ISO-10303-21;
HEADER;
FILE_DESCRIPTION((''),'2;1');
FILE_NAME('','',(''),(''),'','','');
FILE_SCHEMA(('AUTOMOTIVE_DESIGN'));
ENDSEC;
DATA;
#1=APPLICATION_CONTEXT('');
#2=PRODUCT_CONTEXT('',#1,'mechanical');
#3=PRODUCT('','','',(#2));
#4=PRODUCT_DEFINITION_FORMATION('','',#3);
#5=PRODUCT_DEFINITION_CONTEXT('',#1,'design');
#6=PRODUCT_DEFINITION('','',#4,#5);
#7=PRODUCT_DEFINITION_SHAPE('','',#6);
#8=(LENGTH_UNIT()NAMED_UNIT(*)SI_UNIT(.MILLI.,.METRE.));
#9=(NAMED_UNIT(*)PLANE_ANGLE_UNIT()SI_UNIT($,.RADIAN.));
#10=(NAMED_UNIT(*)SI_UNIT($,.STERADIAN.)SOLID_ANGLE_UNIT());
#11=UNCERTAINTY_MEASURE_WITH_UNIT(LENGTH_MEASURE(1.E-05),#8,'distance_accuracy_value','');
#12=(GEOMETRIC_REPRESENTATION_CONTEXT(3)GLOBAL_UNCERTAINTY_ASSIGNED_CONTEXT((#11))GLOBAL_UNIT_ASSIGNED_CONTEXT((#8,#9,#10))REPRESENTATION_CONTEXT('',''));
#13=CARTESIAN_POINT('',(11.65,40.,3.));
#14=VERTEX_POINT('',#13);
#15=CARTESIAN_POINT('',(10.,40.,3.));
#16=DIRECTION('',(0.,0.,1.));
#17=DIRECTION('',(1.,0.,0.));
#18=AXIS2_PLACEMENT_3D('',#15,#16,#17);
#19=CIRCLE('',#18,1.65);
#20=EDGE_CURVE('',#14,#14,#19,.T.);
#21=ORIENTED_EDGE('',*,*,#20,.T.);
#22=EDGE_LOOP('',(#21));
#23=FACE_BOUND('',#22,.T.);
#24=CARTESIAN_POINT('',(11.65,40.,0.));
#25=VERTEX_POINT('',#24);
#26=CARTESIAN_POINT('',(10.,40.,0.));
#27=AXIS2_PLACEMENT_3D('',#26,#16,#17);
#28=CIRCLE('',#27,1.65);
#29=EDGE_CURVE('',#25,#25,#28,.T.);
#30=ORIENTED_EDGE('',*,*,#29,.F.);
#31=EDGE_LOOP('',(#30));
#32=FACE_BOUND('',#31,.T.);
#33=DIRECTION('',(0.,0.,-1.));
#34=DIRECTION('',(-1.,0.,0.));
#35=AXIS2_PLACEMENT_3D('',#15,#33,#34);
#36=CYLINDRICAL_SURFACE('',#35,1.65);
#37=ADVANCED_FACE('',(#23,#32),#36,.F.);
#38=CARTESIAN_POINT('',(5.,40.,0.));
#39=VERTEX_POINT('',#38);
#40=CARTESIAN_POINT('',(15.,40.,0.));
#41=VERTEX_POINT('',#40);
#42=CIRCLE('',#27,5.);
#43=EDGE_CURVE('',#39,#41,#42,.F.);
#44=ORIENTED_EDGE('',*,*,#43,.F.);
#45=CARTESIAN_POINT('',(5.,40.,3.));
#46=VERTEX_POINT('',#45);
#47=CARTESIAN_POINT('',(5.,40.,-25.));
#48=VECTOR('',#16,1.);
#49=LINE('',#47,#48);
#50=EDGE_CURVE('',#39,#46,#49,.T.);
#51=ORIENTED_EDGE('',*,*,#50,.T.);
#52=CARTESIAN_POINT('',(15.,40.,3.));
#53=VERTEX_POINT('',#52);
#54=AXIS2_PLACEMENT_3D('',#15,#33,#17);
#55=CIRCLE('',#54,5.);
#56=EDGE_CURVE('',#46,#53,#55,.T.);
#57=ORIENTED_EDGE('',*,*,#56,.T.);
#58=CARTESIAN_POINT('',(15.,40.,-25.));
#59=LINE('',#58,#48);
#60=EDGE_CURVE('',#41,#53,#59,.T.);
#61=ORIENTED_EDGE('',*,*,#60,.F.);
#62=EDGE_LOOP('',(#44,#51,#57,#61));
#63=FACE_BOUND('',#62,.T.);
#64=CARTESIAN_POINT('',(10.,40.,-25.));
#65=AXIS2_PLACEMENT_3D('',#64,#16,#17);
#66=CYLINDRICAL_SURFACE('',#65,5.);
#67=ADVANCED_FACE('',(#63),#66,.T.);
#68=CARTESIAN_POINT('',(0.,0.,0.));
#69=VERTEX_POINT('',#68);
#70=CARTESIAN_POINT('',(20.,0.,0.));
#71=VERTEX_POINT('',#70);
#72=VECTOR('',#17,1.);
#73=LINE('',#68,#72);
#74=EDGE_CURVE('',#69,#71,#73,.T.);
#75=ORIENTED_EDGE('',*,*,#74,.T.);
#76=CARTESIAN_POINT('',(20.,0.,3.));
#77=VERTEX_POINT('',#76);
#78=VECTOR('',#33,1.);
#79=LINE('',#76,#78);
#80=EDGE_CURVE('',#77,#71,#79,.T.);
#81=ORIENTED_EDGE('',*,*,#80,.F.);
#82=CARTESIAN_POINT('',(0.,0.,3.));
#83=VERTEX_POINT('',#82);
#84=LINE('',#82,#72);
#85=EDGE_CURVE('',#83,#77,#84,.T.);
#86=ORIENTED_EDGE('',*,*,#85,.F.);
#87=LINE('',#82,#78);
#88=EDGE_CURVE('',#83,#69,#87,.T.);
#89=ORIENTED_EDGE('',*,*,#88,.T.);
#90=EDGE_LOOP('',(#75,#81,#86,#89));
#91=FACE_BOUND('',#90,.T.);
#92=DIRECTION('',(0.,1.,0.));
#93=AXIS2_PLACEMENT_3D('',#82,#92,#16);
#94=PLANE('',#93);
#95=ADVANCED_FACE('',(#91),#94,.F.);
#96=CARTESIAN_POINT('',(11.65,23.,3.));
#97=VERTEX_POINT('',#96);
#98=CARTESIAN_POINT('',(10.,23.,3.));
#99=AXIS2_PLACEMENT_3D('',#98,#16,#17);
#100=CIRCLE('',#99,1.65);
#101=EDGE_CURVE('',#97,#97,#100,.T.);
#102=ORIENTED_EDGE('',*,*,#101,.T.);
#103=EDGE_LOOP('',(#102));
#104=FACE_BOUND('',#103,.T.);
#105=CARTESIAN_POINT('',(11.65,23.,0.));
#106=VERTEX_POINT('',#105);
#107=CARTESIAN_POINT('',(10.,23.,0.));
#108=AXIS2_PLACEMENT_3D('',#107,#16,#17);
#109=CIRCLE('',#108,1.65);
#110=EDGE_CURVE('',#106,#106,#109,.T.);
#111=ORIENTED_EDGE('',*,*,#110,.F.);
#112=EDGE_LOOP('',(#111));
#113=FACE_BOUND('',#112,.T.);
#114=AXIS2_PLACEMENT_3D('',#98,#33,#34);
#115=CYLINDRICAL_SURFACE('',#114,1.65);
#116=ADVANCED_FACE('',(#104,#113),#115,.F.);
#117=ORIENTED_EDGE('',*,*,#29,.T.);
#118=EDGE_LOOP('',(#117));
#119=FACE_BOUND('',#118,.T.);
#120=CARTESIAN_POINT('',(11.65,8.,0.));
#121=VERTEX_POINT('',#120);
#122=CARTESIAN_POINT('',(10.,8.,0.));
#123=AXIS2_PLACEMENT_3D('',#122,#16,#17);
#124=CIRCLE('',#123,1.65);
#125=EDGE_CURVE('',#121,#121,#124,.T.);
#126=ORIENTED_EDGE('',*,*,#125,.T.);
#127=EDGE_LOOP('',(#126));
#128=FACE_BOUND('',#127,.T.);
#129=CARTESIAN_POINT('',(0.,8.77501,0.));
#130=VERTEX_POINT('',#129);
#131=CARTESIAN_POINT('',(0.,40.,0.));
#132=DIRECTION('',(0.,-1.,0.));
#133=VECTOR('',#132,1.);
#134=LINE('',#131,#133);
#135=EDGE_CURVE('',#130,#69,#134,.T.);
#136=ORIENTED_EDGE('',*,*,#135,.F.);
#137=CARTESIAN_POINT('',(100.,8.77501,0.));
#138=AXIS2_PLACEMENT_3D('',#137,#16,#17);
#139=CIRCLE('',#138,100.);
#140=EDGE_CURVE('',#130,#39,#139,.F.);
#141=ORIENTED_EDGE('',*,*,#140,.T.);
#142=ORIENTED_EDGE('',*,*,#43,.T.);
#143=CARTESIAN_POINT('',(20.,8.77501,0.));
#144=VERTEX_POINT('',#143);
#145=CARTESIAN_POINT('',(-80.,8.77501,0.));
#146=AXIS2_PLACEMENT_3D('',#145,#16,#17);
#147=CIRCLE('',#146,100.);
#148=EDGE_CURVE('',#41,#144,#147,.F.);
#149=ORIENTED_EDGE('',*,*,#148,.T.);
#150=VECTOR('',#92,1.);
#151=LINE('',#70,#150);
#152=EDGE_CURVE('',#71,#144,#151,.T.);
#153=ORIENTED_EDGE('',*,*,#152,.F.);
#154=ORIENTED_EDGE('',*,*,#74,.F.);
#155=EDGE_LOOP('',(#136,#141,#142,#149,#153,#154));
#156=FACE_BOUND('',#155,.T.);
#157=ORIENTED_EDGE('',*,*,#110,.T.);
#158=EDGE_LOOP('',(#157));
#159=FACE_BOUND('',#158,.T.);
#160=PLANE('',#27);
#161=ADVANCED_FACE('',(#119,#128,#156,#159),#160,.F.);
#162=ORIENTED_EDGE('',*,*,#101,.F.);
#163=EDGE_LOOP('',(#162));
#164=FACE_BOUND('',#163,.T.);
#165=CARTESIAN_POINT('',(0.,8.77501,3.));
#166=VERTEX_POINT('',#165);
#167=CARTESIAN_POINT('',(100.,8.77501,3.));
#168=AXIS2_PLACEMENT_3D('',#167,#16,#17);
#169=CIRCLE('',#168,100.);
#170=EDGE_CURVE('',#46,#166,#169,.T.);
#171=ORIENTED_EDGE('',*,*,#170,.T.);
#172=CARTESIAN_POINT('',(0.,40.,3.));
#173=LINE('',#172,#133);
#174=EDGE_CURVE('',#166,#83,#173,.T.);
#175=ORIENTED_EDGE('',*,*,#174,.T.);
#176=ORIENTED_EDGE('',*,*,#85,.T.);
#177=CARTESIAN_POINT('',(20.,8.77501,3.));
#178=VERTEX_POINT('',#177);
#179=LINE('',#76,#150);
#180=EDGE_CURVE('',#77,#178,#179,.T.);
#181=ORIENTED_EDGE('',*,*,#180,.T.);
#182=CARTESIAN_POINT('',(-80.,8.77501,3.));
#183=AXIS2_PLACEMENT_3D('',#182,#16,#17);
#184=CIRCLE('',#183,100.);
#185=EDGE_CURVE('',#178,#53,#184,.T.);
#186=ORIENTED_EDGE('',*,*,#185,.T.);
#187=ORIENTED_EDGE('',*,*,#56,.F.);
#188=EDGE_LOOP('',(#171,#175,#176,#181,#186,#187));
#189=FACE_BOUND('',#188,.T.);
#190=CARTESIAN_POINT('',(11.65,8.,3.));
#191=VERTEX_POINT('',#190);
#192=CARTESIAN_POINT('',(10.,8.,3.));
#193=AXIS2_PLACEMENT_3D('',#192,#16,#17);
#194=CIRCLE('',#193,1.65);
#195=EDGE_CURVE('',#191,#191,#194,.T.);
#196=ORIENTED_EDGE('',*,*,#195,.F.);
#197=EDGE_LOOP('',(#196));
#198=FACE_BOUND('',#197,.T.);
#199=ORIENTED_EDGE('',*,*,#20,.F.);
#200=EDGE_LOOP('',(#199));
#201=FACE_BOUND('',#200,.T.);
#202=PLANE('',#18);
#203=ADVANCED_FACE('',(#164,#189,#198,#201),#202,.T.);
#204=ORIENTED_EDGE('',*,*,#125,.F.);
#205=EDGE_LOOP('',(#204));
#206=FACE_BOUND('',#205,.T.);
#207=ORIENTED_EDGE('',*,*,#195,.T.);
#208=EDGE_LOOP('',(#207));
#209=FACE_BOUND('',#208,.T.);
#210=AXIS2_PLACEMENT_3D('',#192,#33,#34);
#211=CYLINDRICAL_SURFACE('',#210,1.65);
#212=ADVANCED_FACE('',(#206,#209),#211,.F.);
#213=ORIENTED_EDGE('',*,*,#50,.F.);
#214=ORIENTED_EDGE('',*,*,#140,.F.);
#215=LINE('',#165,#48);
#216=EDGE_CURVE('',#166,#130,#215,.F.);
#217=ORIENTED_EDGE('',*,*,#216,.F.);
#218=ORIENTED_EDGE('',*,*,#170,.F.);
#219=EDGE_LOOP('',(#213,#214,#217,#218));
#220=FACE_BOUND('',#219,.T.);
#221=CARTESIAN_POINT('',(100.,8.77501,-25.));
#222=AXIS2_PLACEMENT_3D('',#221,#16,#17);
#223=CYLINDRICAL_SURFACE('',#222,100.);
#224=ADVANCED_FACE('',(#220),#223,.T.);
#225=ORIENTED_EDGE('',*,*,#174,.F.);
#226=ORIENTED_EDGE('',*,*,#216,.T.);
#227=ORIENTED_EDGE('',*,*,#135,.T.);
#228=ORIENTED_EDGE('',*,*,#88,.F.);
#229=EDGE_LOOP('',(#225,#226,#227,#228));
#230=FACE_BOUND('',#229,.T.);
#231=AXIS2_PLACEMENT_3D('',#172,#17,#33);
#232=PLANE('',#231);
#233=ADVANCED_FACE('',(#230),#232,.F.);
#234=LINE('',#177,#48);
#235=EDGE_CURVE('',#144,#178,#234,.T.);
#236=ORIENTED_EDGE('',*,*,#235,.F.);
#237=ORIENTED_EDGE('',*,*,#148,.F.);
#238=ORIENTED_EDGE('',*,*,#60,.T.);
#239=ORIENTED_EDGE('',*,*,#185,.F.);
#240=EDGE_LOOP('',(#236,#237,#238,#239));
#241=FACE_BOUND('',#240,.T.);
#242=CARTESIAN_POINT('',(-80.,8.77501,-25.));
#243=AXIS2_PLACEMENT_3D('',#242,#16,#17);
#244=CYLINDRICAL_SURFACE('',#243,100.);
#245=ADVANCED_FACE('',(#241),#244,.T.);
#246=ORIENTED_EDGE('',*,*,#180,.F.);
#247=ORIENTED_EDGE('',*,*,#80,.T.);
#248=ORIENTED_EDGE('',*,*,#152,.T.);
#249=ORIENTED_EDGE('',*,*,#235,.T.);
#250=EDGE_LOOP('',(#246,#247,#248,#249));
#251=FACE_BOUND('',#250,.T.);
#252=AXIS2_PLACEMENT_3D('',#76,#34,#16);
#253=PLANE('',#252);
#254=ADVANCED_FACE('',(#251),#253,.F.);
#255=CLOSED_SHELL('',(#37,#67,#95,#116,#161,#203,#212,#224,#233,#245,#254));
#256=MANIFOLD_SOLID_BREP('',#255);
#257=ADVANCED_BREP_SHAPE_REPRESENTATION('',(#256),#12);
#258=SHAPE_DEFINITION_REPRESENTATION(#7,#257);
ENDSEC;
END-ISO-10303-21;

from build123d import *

# Parameters (mm, degrees)
SKETCH_1_R          = 1.65
EXTRUDE_1_DEPTH     = 3
CUT_EXTRUDE_START   = -28
CUT_EXTRUDE_3_DEPTH = 28
FILLET_1_R          = 100


with BuildPart() as part:
    # 草图1 → 凸台-拉伸1 (new body)
    with BuildSketch(Plane.XY):
        with BuildLine():
            Line((0, 0), (20, 0))
            Line((20, 0), (20, 40))
            ThreePointArc((20, 40), (10, 50), (0, 40))
            Line((0, 40), (0, 0))
        make_face()
        with Locations((10, 40)):
            Circle(SKETCH_1_R, mode=Mode.SUBTRACT)
        with Locations((10, 8)):
            Circle(SKETCH_1_R, mode=Mode.SUBTRACT)
        with Locations((10, 23)):
            Circle(SKETCH_1_R, mode=Mode.SUBTRACT)
    extrude(amount=EXTRUDE_1_DEPTH)

    # 草图4 → 切除-拉伸3 (cut)
    with BuildSketch(Plane.XY.offset(3).offset(CUT_EXTRUDE_START)):
        with BuildLine():
            Line((0, 40), (5, 40))
            ThreePointArc((5, 40), (10, 45), (15, 40))
            Line((15, 40), (20, 40))
            ThreePointArc((20, 40), (10, 50), (0, 40))
        make_face()
    extrude(amount=CUT_EXTRUDE_3_DEPTH, mode=Mode.SUBTRACT)

    # 圆角1
    # the kernel refuses this fillet: 100 mm, written as the material it takes off along each edge
    with BuildSketch(Plane(origin=(20, 40, -78.06247498), x_dir=(0, -1, 0), z_dir=(0, 0, 1))) as fillet_1_piece_1:
        with BuildLine():
            CenterArc((31.224989992, -100), FILLET_1_R, 90, 18.194872339)
            Line((0, -5), (0, 0))
            Line((0, 0), (31.224989992, 0))
        make_face()
    extrude(amount=159.12494996, mode=Mode.SUBTRACT)
    with BuildSketch(Plane(origin=(0, 40, -78.06247498), x_dir=(0, -1, 0), z_dir=(0, 0, 1))) as fillet_1_piece_2:
        with BuildLine():
            CenterArc((31.224989992, 100), FILLET_1_R, 251.805127661, 18.194872339)
            Line((0, 5), (0, 0))
            Line((0, 0), (31.224989992, 0))
        make_face()
    extrude(amount=159.12494996, mode=Mode.SUBTRACT)


solid = part.part
